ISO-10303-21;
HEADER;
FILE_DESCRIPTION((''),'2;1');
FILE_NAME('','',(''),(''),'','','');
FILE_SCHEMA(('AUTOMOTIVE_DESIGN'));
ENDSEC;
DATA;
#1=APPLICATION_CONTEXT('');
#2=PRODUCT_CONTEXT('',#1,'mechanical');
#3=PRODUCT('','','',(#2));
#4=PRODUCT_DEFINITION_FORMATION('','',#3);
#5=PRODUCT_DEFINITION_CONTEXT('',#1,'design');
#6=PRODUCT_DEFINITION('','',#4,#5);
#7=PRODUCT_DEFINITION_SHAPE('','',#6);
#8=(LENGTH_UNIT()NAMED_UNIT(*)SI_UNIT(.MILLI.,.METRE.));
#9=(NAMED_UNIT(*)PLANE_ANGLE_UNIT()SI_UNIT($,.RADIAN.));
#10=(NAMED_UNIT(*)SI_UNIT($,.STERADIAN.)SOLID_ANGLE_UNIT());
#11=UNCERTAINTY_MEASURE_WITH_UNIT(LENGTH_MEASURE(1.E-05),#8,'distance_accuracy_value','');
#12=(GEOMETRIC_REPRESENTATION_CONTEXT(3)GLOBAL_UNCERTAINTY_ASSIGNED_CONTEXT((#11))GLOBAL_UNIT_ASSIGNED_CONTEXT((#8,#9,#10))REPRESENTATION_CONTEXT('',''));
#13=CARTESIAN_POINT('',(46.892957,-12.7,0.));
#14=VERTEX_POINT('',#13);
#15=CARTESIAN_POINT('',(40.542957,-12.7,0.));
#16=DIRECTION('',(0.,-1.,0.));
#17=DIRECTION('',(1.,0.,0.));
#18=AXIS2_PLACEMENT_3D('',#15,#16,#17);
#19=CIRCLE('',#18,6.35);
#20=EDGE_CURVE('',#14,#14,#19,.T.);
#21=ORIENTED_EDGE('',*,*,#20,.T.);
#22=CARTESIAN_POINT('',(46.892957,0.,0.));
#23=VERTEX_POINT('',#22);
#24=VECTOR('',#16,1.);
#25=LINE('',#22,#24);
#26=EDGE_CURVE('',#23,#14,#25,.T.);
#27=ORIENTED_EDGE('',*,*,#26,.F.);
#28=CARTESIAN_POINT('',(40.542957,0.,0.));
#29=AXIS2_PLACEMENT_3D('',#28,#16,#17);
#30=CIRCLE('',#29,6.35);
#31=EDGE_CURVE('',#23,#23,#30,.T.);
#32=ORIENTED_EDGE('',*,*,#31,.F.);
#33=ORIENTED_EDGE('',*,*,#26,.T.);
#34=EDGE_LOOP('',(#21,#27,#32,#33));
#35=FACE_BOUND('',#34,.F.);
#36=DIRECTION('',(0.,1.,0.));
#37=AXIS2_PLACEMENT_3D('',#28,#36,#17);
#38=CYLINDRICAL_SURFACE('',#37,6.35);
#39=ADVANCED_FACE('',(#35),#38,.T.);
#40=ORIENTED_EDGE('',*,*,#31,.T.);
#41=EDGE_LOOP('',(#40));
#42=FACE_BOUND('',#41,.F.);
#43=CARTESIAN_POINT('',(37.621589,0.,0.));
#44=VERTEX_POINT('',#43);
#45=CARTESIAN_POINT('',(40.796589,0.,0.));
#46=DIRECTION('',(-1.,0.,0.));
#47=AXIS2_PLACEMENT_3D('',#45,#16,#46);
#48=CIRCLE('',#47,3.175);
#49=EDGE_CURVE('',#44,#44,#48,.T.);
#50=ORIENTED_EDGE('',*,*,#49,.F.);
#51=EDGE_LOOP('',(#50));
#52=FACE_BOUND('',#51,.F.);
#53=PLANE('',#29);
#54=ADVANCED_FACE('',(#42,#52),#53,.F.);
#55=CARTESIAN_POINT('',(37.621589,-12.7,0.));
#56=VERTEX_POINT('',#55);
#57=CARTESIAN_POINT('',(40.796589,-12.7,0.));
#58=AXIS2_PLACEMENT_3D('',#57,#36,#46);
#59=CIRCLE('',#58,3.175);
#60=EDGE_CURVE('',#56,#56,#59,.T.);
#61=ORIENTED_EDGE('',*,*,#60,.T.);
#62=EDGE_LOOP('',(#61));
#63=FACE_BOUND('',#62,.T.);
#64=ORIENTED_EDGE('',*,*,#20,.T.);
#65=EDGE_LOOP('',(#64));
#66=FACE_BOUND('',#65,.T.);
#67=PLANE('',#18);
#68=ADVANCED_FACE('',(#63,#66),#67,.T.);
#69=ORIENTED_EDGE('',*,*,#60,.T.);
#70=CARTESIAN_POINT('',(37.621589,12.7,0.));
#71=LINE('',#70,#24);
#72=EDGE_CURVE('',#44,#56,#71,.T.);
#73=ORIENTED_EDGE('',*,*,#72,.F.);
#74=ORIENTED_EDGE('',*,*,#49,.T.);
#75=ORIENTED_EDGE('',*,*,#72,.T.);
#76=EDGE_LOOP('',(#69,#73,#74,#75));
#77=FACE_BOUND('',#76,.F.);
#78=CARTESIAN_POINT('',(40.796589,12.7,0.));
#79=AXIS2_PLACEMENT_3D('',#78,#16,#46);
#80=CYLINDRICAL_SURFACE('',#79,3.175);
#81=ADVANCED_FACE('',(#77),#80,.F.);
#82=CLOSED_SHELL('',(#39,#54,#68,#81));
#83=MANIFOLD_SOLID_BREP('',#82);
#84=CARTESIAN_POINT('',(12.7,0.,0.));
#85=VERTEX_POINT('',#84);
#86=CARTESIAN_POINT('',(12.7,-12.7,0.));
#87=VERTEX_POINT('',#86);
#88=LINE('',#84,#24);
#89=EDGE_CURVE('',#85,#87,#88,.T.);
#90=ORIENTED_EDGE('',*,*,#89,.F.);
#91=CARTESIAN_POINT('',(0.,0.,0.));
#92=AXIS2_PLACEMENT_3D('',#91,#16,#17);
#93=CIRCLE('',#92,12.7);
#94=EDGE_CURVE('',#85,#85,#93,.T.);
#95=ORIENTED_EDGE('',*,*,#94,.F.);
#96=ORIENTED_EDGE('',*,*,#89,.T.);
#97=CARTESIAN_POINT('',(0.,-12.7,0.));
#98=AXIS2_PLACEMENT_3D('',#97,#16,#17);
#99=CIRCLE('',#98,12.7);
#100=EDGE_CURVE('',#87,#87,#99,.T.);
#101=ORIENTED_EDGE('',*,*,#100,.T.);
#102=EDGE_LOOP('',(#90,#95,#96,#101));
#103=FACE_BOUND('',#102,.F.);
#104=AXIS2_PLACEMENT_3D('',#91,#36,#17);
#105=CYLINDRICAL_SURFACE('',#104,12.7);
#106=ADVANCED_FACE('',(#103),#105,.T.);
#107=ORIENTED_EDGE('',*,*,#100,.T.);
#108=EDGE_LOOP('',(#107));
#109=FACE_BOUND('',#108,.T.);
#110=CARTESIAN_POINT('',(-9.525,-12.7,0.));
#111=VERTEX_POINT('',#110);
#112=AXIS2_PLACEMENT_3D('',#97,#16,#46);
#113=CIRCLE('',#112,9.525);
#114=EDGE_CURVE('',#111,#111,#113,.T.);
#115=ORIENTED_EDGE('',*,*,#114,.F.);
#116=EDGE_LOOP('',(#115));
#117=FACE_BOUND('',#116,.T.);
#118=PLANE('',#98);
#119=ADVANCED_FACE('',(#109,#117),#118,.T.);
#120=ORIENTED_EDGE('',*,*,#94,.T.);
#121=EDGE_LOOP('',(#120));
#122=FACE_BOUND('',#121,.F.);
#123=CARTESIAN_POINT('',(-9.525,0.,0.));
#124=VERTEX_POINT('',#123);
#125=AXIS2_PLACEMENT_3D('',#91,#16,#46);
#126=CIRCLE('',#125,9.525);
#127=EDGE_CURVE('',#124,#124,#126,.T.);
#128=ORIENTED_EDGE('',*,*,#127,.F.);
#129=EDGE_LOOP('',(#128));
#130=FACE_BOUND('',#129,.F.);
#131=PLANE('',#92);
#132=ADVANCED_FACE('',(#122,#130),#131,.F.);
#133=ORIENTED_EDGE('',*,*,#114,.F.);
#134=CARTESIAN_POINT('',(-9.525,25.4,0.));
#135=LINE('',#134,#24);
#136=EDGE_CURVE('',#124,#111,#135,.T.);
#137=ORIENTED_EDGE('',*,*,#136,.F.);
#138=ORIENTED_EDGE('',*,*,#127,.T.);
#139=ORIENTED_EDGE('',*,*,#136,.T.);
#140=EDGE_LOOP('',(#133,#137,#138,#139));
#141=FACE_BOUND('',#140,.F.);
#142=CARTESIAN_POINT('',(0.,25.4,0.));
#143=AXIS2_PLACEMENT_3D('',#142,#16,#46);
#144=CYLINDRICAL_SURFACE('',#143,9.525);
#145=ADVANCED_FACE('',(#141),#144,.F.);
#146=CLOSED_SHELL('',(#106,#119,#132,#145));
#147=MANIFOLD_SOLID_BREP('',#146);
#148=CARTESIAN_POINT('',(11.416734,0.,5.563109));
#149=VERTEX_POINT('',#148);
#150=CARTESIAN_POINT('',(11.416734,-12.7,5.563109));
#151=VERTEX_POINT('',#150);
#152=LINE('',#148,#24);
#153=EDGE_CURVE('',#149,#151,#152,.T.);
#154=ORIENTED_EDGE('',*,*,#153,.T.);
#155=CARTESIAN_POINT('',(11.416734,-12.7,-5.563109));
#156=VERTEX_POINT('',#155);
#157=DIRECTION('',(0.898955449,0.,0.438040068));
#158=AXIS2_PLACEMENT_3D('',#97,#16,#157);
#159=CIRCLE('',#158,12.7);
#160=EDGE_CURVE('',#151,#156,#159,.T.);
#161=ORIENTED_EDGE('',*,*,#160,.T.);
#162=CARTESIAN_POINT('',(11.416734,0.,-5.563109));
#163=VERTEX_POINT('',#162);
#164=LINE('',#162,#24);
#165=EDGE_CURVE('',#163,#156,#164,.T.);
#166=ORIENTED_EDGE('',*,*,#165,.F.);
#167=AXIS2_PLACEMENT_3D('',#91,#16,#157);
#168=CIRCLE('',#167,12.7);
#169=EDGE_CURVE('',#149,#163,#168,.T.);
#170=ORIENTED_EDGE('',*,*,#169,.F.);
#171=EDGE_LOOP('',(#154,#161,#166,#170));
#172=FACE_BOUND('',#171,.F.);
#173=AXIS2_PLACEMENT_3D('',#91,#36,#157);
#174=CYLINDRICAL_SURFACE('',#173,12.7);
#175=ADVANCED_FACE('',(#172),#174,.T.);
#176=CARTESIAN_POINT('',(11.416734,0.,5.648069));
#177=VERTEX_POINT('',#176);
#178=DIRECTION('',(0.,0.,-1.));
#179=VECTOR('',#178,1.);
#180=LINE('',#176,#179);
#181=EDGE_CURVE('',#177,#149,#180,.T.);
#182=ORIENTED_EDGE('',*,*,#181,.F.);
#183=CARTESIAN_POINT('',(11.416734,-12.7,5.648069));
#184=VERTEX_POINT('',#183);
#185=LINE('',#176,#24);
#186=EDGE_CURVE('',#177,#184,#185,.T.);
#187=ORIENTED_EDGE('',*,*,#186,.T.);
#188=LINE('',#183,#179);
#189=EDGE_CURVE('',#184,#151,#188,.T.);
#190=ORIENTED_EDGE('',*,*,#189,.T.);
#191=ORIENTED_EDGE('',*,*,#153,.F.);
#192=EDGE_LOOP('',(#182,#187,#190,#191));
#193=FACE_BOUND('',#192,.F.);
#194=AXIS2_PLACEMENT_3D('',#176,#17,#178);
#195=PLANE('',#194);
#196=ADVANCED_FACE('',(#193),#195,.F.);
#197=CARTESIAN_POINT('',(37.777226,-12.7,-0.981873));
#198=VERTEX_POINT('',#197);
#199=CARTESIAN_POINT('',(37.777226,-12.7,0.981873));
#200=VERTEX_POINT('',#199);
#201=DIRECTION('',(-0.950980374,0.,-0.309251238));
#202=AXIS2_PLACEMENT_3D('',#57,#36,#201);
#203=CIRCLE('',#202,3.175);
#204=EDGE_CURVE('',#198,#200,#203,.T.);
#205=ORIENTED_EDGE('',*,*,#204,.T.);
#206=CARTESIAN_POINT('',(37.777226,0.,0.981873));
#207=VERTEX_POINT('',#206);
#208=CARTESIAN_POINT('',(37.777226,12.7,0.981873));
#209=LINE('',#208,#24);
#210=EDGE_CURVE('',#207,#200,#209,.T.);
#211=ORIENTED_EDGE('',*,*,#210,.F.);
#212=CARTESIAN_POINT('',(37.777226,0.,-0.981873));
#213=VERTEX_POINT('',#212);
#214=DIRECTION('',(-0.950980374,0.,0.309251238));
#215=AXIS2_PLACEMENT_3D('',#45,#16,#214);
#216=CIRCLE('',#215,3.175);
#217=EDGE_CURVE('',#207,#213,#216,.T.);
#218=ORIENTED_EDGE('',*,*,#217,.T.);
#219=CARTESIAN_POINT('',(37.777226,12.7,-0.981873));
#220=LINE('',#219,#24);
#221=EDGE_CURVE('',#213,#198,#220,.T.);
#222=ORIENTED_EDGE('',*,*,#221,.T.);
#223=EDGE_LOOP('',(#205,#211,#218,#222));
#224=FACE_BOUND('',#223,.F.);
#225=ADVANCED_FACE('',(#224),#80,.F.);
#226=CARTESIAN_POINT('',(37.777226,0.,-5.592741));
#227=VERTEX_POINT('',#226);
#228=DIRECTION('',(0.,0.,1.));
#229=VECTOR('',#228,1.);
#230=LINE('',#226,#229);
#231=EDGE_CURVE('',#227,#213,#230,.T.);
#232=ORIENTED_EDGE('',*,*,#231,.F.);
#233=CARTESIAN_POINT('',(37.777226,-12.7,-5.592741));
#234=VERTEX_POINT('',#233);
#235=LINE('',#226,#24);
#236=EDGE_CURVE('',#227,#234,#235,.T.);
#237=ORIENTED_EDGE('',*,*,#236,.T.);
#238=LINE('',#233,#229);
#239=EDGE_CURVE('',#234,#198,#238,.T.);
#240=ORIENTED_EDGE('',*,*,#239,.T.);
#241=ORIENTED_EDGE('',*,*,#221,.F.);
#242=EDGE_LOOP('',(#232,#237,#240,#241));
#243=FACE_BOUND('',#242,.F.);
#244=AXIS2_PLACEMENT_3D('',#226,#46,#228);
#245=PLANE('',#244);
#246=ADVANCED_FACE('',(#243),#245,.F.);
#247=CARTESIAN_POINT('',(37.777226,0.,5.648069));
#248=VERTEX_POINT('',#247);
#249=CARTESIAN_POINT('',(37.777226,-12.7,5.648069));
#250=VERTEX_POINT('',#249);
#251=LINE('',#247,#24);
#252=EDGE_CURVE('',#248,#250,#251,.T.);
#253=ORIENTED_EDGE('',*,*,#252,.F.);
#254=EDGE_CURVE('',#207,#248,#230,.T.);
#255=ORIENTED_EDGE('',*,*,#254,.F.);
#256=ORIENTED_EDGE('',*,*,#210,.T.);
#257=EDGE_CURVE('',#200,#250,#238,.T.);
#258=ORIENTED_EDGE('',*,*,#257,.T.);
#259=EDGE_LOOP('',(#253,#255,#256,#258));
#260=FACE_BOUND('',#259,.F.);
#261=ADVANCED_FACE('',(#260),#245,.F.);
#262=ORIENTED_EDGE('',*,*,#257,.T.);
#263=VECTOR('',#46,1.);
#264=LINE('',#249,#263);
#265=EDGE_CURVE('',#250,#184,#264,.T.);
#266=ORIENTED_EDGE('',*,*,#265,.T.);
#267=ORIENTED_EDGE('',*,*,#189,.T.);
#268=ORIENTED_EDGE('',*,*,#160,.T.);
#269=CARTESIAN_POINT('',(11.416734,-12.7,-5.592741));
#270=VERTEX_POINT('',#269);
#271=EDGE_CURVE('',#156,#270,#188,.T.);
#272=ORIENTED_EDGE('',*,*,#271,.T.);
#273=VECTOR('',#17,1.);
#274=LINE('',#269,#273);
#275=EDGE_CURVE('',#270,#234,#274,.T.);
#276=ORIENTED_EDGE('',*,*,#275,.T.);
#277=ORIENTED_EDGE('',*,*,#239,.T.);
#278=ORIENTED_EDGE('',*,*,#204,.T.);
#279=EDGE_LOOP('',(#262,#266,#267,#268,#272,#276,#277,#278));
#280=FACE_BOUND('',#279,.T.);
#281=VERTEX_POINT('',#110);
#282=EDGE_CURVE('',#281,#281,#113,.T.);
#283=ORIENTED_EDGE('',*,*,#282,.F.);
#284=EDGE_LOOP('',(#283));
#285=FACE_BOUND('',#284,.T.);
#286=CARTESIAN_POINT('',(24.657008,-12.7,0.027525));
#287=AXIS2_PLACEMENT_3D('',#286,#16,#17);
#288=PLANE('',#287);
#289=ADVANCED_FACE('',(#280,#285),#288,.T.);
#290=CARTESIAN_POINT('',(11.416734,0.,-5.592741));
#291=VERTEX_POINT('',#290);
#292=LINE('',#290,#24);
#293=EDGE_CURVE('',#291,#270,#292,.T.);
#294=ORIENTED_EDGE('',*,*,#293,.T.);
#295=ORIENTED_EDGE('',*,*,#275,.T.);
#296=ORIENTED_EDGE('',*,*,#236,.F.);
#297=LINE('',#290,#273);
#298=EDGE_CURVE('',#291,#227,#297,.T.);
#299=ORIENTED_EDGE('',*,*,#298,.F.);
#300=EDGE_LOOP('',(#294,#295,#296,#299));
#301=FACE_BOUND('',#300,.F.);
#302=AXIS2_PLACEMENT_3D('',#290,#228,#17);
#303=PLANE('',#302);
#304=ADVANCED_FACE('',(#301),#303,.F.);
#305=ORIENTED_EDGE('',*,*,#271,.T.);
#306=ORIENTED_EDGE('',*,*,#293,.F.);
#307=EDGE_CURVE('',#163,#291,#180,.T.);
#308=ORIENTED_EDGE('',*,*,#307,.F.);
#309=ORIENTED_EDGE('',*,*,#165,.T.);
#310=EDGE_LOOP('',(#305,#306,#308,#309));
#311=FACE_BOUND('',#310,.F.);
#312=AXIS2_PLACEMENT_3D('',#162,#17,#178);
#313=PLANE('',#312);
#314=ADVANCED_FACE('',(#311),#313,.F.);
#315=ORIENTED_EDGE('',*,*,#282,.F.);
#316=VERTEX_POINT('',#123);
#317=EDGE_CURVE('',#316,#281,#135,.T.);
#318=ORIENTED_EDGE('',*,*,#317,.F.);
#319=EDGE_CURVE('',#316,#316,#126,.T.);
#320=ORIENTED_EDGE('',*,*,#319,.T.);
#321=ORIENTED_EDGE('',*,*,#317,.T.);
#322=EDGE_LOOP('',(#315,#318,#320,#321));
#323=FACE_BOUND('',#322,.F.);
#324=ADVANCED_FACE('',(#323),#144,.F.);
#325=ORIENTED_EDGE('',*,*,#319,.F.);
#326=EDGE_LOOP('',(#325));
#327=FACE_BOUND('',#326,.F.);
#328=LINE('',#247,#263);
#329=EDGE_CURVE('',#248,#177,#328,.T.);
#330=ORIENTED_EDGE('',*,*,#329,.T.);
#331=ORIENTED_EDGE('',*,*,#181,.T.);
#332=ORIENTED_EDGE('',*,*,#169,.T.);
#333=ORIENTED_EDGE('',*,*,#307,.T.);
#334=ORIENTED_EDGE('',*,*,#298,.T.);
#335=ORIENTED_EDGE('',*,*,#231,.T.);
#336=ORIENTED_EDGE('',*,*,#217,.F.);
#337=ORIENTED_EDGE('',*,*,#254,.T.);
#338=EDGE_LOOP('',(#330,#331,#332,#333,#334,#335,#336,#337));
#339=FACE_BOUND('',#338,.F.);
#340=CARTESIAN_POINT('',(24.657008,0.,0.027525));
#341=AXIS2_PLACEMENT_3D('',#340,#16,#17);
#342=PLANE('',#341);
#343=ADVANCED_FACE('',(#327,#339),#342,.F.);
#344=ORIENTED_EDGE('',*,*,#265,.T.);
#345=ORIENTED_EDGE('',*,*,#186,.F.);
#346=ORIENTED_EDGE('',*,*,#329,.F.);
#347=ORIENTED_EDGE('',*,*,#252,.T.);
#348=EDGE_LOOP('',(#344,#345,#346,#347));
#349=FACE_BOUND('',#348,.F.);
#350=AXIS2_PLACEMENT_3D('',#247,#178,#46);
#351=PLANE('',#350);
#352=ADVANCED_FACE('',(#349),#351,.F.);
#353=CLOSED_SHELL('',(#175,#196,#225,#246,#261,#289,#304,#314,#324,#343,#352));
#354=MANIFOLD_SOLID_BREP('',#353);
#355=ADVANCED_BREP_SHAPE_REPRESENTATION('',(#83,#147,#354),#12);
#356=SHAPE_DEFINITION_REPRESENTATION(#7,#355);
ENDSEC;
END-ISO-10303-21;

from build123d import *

# Parameters (mm, degrees)
F3_DEPTH   = 12.7
F0_R       = 12.7
F0_R_2     = 6.35
F5_D       = 19.05
F5_DEPTH   = 25.4
F5_TIP     = 5.7231973962
F5_2_D     = 19.05
F5_2_DEPTH = 25.4
F5_2_TIP   = 5.7231973962
F7_D       = 6.35
F7_DEPTH   = 12.7
F7_TIP     = 1.9077324654
F7_2_D     = 6.35
F7_2_DEPTH = 12.7
F7_2_TIP   = 1.9077324654


with BuildPart() as f3:
    # F1 (on face) → F3 (new body)
    with BuildSketch(Plane.XZ):
        with BuildLine():
            Line((37.7772264183, 5.648068618), (11.4167341962, 5.648068618))
            Line((11.4167341962, 5.648068618), (11.4167341962, 5.5631088694))
            ThreePointArc((11.4167341962, 5.5631088694), (12.3750257433, 2.8545994209), (12.7, 0))
            ThreePointArc((12.7, 0), (12.3750257433, -2.8545994209), (11.4167341962, -5.5631088694))
            Line((11.4167341962, -5.5631088694), (11.4167341962, -5.5927410722))
            Line((11.4167341962, -5.5927410722), (37.7772264183, -5.5927410722))
            Line((37.7772264183, -5.5927410722), (37.7772264183, 5.648068618))
        make_face()
        with BuildLine():
            ThreePointArc((12.7, 0), (12.3750257433, 2.8545994209), (11.4167341962, 5.5631088694))
            Line((11.4167341962, 5.5631088694), (11.4167341962, -5.5631088694))
            ThreePointArc((11.4167341962, -5.5631088694), (12.3750257433, -2.8545994209), (12.7, 0))
        make_face()
        with BuildLine():
            Line((11.4167341962, -5.5631088694), (11.4167341962, 5.5631088694))
            ThreePointArc((11.4167341962, 5.5631088694), (-12.7, 0), (11.4167341962, -5.5631088694))
        make_face()
    extrude(amount=F3_DEPTH)

    # F5
    with Locations(Plane(origin=(0, 0, 0), x_dir=(1, 0, 0), z_dir=(0, 1, 0))):
        with Locations((0, 0)):
            Hole(F5_D / 2, depth=F5_DEPTH)
            with Locations((0, 0, -(F5_DEPTH + F5_TIP / 2))):  # 118° drill point
                Cone(0, F5_D / 2, F5_TIP, mode=Mode.SUBTRACT)

    # F7
    with Locations(Plane(origin=(0, 0, 0), x_dir=(1, 0, 0), z_dir=(0, 1, 0))):
        with Locations((40.7965891063, 0)):
            Hole(F7_D / 2, depth=F7_DEPTH)
            with Locations((0, 0, -(F7_DEPTH + F7_TIP / 2))):  # 118° drill point
                Cone(0, F7_D / 2, F7_TIP, mode=Mode.SUBTRACT)


with BuildPart() as f3b:
    # F0 (on Front) → F3, piece 2 (new body)
    with BuildSketch(Plane.XZ):
        Circle(F0_R)
    extrude(amount=F3_DEPTH)

    # F5#2
    with Locations(Plane(origin=(0, 0, 0), x_dir=(1, 0, 0), z_dir=(0, 1, 0))):
        with Locations((0, 0)):
            Hole(F5_2_D / 2, depth=F5_2_DEPTH)
            with Locations((0, 0, -(F5_2_DEPTH + F5_2_TIP / 2))):  # 118° drill point
                Cone(0, F5_2_D / 2, F5_2_TIP, mode=Mode.SUBTRACT)


with BuildPart() as f3c:
    # F0 (on Front) → F3, piece 3 (new body)
    with BuildSketch(Plane.XZ):
        with Locations((40.5429568411, 0)):
            Circle(F0_R_2)
    extrude(amount=F3_DEPTH)

    # F7#2
    with Locations(Plane(origin=(0, 0, 0), x_dir=(1, 0, 0), z_dir=(0, 1, 0))):
        with Locations((40.7965891063, 0)):
            Hole(F7_2_D / 2, depth=F7_2_DEPTH)
            with Locations((0, 0, -(F7_2_DEPTH + F7_2_TIP / 2))):  # 118° drill point
                Cone(0, F7_2_D / 2, F7_2_TIP, mode=Mode.SUBTRACT)


solid = Compound([f3.part, f3b.part, f3c.part])
